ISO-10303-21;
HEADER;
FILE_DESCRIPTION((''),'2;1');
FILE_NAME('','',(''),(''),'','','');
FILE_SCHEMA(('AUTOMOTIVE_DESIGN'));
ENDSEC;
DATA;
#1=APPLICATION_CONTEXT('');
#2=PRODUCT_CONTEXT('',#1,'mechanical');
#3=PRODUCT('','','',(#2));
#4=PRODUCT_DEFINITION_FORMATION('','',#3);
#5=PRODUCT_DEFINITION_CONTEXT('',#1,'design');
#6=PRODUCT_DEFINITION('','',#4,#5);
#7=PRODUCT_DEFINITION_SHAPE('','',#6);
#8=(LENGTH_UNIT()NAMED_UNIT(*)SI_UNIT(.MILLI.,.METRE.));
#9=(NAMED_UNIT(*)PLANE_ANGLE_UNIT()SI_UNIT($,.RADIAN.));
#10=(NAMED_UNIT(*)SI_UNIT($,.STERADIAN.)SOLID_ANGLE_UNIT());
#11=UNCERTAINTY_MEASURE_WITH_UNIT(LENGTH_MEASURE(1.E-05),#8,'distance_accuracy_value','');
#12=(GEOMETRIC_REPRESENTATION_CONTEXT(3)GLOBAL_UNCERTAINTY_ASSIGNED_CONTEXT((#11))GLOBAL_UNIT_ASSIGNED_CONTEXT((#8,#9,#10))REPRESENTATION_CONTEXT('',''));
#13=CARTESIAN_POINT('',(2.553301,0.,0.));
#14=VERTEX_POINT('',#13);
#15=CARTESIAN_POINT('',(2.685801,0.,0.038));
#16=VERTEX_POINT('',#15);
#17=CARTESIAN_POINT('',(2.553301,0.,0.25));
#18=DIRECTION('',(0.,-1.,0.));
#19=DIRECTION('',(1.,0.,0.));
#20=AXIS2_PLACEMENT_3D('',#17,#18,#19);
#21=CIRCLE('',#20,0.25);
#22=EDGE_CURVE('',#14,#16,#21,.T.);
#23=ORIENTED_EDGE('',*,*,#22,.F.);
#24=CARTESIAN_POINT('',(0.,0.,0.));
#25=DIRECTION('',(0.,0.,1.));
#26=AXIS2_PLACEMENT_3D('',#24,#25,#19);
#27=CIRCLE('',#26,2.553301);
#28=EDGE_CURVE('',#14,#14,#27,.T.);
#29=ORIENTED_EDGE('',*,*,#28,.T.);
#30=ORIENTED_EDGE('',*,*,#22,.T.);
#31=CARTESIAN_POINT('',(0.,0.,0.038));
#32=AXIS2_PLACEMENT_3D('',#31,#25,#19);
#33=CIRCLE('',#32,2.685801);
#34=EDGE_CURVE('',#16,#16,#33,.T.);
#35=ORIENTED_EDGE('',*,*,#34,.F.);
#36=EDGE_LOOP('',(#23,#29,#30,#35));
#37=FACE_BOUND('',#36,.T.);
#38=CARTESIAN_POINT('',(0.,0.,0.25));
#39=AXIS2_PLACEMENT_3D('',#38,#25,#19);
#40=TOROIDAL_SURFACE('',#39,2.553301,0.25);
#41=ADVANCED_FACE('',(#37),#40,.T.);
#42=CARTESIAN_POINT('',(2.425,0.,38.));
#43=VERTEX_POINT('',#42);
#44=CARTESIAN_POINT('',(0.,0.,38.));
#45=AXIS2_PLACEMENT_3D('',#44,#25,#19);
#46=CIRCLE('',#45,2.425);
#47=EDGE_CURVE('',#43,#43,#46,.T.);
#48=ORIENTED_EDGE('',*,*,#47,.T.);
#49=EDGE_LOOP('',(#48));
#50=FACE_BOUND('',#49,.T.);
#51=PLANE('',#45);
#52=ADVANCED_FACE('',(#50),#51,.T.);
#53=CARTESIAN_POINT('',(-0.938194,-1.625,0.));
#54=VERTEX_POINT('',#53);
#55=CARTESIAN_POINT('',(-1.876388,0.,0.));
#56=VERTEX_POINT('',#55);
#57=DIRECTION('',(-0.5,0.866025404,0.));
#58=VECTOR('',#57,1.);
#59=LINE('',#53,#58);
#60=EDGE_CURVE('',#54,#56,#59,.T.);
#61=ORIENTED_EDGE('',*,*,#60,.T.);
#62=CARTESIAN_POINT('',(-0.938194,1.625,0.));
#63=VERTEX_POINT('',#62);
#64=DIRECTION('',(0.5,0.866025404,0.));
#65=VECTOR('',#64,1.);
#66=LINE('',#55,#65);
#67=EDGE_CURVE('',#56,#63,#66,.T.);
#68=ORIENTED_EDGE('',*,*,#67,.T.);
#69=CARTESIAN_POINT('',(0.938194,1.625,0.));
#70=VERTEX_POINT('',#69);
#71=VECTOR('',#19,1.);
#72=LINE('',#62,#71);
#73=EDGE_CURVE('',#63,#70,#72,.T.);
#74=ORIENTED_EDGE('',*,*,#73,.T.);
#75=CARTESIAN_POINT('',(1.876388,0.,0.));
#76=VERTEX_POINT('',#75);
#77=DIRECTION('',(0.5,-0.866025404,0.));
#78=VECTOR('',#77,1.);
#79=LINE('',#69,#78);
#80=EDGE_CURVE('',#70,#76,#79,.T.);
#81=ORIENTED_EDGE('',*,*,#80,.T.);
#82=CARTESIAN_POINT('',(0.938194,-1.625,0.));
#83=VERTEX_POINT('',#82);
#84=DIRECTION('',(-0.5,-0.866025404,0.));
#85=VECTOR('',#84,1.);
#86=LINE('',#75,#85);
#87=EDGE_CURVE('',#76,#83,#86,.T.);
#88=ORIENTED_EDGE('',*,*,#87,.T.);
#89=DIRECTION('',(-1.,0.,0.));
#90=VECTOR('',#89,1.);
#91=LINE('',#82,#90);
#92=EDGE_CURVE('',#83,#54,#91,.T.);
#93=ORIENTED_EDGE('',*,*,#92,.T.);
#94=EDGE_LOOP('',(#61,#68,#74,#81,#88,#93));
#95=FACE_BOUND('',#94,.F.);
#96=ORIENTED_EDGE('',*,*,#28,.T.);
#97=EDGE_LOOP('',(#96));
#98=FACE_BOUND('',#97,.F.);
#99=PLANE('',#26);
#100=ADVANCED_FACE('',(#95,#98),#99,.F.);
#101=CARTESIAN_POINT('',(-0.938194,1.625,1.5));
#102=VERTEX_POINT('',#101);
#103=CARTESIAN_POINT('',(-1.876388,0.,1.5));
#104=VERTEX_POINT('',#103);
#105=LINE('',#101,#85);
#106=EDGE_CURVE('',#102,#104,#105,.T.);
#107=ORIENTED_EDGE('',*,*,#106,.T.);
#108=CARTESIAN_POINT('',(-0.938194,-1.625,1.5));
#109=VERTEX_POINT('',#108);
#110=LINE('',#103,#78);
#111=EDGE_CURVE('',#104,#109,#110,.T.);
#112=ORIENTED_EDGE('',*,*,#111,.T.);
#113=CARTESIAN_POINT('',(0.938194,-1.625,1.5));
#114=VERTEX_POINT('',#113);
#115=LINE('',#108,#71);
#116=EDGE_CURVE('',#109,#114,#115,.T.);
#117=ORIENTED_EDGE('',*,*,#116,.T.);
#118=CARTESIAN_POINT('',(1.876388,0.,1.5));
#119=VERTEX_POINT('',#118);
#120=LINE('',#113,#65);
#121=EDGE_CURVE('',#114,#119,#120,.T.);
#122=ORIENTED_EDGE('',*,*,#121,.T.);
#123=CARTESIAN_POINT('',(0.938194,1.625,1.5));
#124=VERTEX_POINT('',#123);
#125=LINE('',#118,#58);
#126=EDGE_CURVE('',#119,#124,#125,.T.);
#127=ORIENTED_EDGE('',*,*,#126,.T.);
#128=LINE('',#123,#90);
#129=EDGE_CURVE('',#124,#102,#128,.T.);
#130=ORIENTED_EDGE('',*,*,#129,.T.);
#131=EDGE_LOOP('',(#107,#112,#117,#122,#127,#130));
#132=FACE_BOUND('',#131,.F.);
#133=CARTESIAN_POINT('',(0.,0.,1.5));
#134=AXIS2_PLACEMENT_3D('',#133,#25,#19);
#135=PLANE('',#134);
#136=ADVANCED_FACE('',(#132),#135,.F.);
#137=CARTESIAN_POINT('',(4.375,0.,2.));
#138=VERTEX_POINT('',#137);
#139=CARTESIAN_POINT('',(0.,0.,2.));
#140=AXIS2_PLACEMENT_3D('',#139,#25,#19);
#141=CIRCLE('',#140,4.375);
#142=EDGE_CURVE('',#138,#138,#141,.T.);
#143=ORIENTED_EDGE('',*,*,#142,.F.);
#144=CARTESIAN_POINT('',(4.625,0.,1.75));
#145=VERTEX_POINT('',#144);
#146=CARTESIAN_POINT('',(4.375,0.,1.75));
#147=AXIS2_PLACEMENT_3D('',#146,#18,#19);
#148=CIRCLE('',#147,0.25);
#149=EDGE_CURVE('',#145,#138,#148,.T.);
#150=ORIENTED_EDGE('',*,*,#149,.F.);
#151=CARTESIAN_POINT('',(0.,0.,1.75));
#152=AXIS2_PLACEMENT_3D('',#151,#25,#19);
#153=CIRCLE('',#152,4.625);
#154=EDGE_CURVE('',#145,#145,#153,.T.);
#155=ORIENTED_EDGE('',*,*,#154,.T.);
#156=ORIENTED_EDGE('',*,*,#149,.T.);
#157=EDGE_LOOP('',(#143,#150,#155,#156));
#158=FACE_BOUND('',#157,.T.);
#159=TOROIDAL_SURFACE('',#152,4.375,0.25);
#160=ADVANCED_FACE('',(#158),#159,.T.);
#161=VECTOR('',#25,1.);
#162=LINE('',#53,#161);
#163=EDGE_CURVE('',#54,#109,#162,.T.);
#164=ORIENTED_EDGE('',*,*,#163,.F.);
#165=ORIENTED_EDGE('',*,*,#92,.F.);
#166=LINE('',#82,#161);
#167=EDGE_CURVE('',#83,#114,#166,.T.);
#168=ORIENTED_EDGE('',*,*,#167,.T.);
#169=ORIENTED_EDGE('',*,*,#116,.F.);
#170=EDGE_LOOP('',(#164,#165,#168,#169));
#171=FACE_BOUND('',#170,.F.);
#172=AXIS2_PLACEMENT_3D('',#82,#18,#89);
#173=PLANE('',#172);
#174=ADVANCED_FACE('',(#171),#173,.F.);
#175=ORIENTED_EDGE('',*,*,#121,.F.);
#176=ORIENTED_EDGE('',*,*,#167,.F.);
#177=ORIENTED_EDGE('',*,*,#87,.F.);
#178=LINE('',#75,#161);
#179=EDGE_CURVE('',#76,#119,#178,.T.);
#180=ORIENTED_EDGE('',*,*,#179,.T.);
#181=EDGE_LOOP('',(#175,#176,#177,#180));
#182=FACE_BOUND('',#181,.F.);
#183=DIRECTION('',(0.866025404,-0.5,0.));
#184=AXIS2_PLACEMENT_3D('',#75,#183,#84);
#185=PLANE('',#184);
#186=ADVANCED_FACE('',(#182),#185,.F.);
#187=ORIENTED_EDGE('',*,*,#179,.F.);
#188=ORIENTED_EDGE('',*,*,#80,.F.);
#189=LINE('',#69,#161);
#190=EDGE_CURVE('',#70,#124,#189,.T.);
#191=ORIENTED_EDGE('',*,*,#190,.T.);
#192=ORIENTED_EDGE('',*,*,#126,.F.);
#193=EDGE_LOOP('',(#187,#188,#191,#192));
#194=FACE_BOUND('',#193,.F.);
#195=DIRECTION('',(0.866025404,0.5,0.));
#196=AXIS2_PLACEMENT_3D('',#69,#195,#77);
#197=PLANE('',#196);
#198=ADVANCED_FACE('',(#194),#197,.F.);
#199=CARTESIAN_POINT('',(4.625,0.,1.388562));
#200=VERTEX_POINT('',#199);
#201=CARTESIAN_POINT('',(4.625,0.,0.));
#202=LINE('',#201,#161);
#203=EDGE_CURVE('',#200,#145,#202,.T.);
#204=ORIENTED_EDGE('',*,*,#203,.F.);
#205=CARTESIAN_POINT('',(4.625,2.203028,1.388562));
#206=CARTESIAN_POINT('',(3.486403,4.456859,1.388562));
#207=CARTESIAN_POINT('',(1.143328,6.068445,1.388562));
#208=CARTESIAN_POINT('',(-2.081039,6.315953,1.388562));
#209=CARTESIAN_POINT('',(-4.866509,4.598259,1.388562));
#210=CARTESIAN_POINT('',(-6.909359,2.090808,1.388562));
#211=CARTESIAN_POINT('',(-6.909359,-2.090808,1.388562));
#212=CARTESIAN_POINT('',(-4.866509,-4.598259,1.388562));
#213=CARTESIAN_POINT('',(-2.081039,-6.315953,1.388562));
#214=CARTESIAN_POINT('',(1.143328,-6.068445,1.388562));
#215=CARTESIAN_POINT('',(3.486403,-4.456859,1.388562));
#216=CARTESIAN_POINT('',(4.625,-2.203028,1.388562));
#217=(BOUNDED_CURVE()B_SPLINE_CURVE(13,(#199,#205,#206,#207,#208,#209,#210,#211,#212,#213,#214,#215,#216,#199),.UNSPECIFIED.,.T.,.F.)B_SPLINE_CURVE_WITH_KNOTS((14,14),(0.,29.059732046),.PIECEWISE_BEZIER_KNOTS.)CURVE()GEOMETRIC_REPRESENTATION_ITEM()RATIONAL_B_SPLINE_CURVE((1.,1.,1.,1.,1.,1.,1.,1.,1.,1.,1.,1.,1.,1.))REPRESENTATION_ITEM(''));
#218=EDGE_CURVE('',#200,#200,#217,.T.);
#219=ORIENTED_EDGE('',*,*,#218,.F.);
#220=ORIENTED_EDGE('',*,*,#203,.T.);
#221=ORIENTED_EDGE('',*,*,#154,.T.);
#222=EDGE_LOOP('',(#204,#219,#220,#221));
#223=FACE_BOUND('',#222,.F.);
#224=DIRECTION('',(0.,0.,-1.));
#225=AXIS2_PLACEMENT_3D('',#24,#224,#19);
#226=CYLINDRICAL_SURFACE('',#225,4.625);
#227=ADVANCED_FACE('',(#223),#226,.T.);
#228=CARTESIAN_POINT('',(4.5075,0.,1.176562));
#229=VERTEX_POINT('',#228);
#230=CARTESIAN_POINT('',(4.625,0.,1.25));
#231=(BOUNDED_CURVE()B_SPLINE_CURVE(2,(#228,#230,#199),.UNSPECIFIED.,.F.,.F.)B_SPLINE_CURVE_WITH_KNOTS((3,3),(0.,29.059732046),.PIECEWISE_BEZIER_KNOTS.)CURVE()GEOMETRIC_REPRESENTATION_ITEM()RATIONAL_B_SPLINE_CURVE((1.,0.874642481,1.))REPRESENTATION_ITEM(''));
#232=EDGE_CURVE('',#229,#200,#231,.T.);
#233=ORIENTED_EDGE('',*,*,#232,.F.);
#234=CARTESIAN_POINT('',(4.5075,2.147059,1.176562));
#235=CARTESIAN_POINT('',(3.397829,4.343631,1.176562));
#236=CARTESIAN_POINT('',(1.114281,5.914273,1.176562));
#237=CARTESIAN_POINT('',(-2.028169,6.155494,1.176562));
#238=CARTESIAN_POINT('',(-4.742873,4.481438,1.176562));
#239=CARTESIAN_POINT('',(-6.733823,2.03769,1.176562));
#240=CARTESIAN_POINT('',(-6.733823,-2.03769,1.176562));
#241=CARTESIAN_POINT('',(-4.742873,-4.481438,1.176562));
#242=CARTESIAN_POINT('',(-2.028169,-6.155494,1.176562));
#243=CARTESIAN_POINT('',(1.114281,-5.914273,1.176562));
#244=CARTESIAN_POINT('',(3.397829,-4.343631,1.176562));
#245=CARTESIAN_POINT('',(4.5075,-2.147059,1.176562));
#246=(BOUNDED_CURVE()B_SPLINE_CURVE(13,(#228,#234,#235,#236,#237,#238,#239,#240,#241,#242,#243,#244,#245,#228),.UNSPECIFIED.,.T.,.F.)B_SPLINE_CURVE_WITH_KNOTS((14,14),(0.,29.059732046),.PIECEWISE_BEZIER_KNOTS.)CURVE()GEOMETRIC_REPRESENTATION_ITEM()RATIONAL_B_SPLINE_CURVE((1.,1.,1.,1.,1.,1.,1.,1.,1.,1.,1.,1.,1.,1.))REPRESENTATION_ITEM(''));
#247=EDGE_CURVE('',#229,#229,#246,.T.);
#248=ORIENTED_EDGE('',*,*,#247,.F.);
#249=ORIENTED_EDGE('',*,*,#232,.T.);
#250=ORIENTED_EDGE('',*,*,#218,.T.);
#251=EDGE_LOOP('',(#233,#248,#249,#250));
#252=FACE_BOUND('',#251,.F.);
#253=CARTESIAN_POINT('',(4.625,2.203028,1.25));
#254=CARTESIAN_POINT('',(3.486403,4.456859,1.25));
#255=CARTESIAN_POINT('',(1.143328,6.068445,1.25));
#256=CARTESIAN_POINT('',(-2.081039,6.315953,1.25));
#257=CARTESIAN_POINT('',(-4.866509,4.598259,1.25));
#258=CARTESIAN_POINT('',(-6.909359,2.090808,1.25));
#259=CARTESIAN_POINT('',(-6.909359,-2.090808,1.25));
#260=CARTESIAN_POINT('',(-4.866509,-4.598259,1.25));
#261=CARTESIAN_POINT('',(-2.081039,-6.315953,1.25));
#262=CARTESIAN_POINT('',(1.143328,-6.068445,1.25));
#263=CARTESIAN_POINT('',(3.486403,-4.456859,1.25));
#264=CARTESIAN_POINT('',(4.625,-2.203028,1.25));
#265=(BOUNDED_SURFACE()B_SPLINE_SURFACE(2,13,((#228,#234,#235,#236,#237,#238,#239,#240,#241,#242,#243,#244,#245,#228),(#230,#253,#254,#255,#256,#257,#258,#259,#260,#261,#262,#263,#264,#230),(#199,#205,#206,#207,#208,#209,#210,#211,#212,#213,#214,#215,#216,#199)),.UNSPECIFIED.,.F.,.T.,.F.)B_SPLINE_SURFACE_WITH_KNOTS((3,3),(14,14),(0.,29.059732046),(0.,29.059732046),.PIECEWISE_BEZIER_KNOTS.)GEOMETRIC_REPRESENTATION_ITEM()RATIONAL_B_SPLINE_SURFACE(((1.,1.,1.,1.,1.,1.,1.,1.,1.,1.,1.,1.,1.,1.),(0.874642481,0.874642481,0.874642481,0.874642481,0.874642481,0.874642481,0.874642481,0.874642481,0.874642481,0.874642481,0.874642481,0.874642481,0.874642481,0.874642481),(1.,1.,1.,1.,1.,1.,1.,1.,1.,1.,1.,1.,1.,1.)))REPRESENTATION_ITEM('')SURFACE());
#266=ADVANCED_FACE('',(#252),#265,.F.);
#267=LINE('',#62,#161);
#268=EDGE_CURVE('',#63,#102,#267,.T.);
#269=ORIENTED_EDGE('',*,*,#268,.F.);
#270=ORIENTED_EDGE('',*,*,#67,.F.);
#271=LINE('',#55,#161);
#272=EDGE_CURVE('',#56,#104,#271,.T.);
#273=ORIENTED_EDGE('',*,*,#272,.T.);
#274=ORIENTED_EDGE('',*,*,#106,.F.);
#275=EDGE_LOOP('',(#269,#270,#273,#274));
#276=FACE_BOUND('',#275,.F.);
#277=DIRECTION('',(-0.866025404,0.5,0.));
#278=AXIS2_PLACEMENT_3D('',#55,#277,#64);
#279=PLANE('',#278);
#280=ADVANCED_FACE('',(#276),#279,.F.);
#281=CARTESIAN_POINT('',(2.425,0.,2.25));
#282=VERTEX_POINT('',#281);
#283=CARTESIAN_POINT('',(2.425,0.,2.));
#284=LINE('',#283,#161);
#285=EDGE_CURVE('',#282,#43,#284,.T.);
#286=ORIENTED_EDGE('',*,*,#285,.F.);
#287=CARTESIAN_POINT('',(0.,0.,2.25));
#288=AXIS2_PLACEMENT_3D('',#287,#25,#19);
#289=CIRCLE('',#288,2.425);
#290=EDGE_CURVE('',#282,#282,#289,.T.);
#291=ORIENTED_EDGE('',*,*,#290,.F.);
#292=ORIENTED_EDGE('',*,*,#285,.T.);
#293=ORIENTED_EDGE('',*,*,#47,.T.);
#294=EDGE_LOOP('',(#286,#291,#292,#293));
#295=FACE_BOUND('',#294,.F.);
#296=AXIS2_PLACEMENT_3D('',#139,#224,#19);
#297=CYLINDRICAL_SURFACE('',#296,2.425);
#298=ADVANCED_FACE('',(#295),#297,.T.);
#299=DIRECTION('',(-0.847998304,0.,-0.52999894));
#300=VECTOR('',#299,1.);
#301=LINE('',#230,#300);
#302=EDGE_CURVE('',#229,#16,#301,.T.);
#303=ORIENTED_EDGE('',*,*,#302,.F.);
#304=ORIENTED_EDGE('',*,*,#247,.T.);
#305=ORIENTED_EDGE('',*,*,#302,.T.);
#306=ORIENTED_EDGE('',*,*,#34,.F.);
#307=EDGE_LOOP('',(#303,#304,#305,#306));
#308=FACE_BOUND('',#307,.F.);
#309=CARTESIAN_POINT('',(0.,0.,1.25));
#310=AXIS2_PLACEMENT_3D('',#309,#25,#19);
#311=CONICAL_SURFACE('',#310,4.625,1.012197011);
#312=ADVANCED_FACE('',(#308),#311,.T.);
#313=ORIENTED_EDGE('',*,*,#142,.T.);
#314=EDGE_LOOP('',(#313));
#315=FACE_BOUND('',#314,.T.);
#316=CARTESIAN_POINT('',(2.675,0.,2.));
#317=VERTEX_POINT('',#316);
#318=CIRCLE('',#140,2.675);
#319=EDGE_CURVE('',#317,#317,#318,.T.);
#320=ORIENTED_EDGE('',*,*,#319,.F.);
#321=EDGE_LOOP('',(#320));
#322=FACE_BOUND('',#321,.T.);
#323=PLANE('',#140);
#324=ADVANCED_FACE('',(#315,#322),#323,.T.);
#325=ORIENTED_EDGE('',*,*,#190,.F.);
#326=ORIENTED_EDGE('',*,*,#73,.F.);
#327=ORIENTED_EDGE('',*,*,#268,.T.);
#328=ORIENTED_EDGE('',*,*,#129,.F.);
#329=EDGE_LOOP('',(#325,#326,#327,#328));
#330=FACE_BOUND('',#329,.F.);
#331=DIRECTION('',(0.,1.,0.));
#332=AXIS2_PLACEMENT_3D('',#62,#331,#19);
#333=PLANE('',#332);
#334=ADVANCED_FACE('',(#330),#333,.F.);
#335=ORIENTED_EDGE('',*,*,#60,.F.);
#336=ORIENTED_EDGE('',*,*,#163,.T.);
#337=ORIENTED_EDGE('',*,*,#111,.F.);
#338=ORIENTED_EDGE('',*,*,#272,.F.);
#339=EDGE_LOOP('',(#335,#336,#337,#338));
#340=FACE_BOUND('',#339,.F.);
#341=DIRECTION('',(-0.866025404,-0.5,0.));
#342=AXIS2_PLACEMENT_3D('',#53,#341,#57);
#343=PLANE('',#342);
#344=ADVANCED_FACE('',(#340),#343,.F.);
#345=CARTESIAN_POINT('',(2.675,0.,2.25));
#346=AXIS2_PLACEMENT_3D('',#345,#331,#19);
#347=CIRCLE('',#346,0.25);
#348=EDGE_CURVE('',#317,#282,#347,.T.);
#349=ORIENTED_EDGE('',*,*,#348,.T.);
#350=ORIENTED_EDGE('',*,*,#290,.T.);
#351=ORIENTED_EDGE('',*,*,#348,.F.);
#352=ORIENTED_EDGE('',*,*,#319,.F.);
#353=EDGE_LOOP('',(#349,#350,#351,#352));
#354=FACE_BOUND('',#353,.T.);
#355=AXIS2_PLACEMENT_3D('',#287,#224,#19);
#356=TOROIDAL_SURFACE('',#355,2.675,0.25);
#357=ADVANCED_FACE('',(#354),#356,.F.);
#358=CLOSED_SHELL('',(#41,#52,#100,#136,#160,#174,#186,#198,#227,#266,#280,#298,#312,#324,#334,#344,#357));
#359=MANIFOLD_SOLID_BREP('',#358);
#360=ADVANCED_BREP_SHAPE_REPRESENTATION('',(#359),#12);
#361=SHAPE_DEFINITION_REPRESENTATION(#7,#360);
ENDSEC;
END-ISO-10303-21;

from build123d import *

# Parameters (mm, degrees)
F1_R     = 4.625
F1_R_2   = 2.425
F2_DEPTH = 2
F3_START = 1.5
F3_DEPTH = 0.5
F4_START = 2
F4_DEPTH = 36
F5_SIZE2 = 2
F5_SIZE  = 1.25
F6_R     = 0.25


# Not quite as in the source:
# - a feature names something its author has since deleted; it is built from what else it names


with BuildPart() as f2:
    # F1 (on Top) → F2 (new body)
    with BuildSketch(Plane.XY):
        Circle(F1_R)
        Circle(F1_R_2, mode=Mode.SUBTRACT)
        Circle(F1_R_2)
        Polygon((-0.9381941874, -1.625), (-1.8763883749, 0), (-0.9381941874, 1.625), (0.9381941874, 1.625), (1.8763883749, 0), (0.9381941874, -1.625), align=None, mode=Mode.SUBTRACT)
    extrude(amount=F2_DEPTH)

    # F1 (on Top) → F3 (join)
    with BuildSketch(Plane.XY.offset(F3_START)):
        Polygon((-0.9381941874, 1.625), (-1.8763883749, 0), (-0.9381941874, -1.625), (0.9381941874, -1.625), (1.8763883749, 0), (0.9381941874, 1.625), align=None)
    extrude(amount=F3_DEPTH)

    # F1 (on Top) → F4 (join)
    with BuildSketch(Plane.XY.offset(F4_START)):
        Circle(F1_R_2)
        Polygon((-0.9381941874, -1.625), (-1.8763883749, 0), (-0.9381941874, 1.625), (0.9381941874, 1.625), (1.8763883749, 0), (0.9381941874, -1.625), align=None, mode=Mode.SUBTRACT)
        Polygon((-0.9381941874, 1.625), (-1.8763883749, 0), (-0.9381941874, -1.625), (0.9381941874, -1.625), (1.8763883749, 0), (0.9381941874, 1.625), align=None)
    extrude(amount=F4_DEPTH)

    # F5
    f5_edges = [f2.edges().sort_by_distance(p)[0] for p in [
        (-4.625, 0, 0),
    ]]
    f5_side = f2.faces().sort_by_distance((-4.625, 0, 1))[0]
    chamfer(f5_edges, length=F5_SIZE, length2=F5_SIZE2, reference=f5_side)

    # F6
    f6_edges = [f2.edges().sort_by_distance(p)[0] for p in [
        (-4.625, 0, 2),
        (-2.425, 0, 2),
        (-2.625, 0, 0),
        (-4.625, 0, 1.25),
    ]]
    fillet(f6_edges, radius=F6_R)


solid = f2.part
